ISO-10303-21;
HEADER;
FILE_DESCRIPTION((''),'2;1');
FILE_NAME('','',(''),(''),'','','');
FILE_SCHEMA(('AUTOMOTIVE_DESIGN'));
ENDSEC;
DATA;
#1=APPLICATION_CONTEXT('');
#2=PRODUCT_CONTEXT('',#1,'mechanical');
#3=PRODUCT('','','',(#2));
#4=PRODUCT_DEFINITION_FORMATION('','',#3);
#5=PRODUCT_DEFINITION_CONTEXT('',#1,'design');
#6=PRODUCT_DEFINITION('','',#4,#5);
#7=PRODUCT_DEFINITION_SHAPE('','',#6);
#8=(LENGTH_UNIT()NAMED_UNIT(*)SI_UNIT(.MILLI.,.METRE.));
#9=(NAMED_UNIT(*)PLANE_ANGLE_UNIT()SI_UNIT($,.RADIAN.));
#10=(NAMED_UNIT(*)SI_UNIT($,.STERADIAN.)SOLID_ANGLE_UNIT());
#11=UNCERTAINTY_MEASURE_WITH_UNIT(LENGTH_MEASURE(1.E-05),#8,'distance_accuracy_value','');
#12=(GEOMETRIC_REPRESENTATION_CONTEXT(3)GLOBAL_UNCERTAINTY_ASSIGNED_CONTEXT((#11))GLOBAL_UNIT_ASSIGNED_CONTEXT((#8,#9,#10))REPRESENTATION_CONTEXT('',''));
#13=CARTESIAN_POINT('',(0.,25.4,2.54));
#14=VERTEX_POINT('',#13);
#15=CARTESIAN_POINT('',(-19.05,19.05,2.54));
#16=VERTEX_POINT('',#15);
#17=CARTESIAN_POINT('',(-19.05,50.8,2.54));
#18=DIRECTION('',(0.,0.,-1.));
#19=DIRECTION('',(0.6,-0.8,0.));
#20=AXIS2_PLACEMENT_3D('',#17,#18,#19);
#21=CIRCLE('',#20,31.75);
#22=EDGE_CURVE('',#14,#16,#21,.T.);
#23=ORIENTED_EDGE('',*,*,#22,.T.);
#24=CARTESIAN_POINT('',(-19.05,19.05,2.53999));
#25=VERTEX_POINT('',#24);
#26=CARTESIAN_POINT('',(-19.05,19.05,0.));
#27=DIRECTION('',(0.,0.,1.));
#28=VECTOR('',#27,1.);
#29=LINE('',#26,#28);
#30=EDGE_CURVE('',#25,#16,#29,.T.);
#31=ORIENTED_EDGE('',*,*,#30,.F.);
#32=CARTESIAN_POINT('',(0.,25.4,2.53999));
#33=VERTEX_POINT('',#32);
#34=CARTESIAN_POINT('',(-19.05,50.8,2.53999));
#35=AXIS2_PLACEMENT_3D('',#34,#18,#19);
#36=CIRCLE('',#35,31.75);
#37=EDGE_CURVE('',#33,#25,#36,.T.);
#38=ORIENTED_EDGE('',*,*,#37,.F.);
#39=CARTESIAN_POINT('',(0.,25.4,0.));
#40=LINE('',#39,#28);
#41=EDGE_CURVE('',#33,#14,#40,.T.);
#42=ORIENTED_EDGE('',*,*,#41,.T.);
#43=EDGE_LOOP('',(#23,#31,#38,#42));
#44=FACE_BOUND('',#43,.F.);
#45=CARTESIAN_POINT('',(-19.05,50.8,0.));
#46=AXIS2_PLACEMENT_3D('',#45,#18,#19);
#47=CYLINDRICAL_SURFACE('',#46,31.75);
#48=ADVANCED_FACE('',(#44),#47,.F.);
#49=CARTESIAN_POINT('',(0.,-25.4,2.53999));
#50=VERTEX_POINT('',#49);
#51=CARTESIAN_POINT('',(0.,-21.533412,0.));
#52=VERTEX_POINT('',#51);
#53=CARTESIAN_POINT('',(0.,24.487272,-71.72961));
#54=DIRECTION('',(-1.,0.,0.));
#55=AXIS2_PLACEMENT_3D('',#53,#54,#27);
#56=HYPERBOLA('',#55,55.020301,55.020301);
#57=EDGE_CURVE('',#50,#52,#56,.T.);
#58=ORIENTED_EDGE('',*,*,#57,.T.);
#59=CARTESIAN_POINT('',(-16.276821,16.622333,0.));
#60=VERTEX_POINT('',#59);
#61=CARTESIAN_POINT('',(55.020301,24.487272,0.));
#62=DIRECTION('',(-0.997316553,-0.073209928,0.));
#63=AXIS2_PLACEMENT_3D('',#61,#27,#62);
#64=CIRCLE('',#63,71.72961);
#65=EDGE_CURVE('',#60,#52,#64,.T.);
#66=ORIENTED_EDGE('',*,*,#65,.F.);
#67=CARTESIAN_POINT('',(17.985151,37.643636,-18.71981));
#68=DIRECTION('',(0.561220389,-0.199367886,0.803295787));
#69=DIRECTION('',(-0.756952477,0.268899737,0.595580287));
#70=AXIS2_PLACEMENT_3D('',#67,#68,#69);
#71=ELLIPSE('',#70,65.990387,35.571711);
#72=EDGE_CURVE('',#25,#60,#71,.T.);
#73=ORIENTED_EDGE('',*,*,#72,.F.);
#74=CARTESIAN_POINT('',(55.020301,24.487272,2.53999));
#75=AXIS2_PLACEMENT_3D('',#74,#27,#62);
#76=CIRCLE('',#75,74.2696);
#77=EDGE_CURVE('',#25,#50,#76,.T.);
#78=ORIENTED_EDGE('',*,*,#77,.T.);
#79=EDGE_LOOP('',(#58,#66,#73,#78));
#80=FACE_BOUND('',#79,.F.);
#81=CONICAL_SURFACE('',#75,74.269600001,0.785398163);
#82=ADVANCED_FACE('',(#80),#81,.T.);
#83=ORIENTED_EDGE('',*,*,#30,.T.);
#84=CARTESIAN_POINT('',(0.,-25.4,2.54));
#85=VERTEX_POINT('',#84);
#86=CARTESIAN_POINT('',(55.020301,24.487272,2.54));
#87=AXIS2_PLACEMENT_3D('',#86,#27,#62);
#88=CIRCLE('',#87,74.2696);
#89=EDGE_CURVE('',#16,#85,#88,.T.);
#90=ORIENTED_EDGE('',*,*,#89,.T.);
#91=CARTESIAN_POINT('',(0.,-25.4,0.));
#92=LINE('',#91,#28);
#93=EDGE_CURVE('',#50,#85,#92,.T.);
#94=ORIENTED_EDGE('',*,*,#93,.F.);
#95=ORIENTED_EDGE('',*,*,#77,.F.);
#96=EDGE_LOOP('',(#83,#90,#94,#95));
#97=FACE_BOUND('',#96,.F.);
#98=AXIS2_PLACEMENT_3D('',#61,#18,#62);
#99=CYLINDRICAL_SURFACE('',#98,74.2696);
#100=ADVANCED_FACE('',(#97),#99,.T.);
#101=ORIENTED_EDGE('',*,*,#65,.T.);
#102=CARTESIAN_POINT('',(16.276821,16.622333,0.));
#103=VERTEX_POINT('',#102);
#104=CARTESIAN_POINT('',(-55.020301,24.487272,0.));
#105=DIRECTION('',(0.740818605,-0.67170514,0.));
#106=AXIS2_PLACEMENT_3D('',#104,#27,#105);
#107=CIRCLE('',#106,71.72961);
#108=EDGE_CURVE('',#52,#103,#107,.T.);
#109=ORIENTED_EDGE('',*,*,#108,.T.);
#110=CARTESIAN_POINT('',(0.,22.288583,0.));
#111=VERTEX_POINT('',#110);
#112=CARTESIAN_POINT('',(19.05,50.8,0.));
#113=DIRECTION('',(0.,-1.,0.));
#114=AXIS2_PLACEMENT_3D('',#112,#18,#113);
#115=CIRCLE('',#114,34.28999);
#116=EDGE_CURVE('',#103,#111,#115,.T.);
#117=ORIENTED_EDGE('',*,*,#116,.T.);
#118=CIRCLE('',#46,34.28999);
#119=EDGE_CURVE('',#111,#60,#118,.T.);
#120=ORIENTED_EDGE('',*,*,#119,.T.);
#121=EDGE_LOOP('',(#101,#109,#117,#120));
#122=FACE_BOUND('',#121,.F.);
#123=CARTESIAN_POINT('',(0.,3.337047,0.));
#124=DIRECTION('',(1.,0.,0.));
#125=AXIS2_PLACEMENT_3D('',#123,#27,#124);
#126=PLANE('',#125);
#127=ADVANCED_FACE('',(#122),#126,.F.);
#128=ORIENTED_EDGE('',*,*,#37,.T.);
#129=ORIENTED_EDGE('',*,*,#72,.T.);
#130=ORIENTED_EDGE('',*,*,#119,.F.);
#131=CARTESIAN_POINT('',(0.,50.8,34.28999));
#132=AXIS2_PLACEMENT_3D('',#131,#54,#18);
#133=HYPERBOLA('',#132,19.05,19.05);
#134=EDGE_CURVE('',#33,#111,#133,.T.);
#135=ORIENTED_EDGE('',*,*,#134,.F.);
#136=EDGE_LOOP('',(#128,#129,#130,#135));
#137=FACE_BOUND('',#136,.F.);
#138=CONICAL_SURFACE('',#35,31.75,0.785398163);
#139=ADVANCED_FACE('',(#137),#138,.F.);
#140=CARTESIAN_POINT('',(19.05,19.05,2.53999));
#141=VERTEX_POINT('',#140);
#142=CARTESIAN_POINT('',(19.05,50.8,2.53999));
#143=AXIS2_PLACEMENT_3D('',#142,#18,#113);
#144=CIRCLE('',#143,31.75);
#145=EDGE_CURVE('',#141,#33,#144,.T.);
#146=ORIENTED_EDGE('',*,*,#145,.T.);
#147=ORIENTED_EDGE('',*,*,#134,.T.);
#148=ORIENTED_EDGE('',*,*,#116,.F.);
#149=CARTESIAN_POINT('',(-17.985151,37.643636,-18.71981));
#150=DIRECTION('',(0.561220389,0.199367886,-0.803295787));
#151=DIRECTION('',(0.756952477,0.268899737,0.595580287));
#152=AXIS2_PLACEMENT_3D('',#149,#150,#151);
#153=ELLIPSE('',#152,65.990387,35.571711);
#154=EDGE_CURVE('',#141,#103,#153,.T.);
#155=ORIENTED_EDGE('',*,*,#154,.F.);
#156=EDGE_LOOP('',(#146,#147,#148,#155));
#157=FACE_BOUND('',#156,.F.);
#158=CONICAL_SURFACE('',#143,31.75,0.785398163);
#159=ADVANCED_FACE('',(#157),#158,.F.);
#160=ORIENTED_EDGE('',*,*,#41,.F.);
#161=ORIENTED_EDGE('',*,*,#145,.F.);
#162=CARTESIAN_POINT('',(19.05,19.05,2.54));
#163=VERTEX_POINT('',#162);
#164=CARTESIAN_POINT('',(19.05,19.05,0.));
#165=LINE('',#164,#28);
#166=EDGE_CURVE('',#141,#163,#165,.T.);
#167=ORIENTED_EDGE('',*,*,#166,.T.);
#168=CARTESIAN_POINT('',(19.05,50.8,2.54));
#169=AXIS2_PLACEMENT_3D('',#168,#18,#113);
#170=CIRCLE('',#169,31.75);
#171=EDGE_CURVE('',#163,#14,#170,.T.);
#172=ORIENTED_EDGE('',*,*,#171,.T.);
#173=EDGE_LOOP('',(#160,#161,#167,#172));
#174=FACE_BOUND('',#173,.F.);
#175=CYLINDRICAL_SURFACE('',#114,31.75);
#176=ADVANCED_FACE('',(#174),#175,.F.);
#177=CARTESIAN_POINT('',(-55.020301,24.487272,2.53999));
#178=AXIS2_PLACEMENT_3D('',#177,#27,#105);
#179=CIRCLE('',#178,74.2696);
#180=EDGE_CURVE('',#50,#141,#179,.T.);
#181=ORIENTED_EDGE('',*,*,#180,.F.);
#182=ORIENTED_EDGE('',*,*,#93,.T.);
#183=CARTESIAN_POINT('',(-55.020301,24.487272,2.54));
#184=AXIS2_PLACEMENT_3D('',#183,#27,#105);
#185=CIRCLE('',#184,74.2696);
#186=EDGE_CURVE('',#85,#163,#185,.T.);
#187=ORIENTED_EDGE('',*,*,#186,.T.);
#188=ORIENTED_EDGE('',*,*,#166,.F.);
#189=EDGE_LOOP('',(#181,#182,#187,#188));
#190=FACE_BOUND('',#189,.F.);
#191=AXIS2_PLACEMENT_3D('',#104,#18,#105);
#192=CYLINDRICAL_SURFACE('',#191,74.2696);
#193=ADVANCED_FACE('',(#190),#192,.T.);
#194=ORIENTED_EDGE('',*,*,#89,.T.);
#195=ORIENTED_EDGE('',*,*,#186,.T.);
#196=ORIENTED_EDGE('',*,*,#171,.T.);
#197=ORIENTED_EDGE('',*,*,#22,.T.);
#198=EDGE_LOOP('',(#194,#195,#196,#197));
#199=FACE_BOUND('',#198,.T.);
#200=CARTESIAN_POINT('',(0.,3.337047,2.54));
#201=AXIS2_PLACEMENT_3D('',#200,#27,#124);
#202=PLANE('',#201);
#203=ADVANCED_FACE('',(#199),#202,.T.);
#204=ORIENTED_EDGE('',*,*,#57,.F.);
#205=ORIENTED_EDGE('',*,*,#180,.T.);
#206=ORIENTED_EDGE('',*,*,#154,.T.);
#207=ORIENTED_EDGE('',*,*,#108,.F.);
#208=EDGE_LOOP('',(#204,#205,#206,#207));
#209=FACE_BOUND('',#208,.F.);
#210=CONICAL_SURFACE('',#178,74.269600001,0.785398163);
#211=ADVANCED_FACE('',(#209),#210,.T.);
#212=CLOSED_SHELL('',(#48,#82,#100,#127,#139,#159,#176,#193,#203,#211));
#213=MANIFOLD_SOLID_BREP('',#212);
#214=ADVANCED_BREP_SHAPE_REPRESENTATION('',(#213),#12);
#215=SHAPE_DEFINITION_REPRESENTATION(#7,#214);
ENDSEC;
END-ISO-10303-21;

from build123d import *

# Parameters (mm, degrees)
F1_DEPTH = 2.54
F2_SIZE  = 2.53999


# Not quite as in the source:
# - a fillet or chamfer is up to 0.001 mm smaller than in the source, because OpenCascade refuses the exact size


with BuildPart() as f1:
    # F0 (on Top) → F1 (new body)
    with BuildSketch(Plane.XY):
        with BuildLine():
            ThreePointArc((0, 25.4), (-9.009768429, 20.6793052869), (-19.05, 19.05))
            ThreePointArc((-19.05, 19.05), (-13.2442322719, -4.768956688), (0, -25.4))
            ThreePointArc((0, -25.4), (13.2442322719, -4.768956688), (19.05, 19.05))
            ThreePointArc((19.05, 19.05), (9.009768429, 20.6793052869), (0, 25.4))
        make_face()
    extrude(amount=F1_DEPTH)

    # F2 (size 2.54 in the source; OpenCascade refuses exactly that, so slightly less here)
    f2_edges = [f1.edges().sort_by_distance(p)[0] for p in [
        (13.244232, -4.768957, 0),
        (-13.244232, -4.768957, 0),
        (-9.009768, 20.679305, 0),
        (9.009768, 20.679305, 0),
    ]]
    chamfer(f2_edges, length=F2_SIZE)


solid = f1.part
